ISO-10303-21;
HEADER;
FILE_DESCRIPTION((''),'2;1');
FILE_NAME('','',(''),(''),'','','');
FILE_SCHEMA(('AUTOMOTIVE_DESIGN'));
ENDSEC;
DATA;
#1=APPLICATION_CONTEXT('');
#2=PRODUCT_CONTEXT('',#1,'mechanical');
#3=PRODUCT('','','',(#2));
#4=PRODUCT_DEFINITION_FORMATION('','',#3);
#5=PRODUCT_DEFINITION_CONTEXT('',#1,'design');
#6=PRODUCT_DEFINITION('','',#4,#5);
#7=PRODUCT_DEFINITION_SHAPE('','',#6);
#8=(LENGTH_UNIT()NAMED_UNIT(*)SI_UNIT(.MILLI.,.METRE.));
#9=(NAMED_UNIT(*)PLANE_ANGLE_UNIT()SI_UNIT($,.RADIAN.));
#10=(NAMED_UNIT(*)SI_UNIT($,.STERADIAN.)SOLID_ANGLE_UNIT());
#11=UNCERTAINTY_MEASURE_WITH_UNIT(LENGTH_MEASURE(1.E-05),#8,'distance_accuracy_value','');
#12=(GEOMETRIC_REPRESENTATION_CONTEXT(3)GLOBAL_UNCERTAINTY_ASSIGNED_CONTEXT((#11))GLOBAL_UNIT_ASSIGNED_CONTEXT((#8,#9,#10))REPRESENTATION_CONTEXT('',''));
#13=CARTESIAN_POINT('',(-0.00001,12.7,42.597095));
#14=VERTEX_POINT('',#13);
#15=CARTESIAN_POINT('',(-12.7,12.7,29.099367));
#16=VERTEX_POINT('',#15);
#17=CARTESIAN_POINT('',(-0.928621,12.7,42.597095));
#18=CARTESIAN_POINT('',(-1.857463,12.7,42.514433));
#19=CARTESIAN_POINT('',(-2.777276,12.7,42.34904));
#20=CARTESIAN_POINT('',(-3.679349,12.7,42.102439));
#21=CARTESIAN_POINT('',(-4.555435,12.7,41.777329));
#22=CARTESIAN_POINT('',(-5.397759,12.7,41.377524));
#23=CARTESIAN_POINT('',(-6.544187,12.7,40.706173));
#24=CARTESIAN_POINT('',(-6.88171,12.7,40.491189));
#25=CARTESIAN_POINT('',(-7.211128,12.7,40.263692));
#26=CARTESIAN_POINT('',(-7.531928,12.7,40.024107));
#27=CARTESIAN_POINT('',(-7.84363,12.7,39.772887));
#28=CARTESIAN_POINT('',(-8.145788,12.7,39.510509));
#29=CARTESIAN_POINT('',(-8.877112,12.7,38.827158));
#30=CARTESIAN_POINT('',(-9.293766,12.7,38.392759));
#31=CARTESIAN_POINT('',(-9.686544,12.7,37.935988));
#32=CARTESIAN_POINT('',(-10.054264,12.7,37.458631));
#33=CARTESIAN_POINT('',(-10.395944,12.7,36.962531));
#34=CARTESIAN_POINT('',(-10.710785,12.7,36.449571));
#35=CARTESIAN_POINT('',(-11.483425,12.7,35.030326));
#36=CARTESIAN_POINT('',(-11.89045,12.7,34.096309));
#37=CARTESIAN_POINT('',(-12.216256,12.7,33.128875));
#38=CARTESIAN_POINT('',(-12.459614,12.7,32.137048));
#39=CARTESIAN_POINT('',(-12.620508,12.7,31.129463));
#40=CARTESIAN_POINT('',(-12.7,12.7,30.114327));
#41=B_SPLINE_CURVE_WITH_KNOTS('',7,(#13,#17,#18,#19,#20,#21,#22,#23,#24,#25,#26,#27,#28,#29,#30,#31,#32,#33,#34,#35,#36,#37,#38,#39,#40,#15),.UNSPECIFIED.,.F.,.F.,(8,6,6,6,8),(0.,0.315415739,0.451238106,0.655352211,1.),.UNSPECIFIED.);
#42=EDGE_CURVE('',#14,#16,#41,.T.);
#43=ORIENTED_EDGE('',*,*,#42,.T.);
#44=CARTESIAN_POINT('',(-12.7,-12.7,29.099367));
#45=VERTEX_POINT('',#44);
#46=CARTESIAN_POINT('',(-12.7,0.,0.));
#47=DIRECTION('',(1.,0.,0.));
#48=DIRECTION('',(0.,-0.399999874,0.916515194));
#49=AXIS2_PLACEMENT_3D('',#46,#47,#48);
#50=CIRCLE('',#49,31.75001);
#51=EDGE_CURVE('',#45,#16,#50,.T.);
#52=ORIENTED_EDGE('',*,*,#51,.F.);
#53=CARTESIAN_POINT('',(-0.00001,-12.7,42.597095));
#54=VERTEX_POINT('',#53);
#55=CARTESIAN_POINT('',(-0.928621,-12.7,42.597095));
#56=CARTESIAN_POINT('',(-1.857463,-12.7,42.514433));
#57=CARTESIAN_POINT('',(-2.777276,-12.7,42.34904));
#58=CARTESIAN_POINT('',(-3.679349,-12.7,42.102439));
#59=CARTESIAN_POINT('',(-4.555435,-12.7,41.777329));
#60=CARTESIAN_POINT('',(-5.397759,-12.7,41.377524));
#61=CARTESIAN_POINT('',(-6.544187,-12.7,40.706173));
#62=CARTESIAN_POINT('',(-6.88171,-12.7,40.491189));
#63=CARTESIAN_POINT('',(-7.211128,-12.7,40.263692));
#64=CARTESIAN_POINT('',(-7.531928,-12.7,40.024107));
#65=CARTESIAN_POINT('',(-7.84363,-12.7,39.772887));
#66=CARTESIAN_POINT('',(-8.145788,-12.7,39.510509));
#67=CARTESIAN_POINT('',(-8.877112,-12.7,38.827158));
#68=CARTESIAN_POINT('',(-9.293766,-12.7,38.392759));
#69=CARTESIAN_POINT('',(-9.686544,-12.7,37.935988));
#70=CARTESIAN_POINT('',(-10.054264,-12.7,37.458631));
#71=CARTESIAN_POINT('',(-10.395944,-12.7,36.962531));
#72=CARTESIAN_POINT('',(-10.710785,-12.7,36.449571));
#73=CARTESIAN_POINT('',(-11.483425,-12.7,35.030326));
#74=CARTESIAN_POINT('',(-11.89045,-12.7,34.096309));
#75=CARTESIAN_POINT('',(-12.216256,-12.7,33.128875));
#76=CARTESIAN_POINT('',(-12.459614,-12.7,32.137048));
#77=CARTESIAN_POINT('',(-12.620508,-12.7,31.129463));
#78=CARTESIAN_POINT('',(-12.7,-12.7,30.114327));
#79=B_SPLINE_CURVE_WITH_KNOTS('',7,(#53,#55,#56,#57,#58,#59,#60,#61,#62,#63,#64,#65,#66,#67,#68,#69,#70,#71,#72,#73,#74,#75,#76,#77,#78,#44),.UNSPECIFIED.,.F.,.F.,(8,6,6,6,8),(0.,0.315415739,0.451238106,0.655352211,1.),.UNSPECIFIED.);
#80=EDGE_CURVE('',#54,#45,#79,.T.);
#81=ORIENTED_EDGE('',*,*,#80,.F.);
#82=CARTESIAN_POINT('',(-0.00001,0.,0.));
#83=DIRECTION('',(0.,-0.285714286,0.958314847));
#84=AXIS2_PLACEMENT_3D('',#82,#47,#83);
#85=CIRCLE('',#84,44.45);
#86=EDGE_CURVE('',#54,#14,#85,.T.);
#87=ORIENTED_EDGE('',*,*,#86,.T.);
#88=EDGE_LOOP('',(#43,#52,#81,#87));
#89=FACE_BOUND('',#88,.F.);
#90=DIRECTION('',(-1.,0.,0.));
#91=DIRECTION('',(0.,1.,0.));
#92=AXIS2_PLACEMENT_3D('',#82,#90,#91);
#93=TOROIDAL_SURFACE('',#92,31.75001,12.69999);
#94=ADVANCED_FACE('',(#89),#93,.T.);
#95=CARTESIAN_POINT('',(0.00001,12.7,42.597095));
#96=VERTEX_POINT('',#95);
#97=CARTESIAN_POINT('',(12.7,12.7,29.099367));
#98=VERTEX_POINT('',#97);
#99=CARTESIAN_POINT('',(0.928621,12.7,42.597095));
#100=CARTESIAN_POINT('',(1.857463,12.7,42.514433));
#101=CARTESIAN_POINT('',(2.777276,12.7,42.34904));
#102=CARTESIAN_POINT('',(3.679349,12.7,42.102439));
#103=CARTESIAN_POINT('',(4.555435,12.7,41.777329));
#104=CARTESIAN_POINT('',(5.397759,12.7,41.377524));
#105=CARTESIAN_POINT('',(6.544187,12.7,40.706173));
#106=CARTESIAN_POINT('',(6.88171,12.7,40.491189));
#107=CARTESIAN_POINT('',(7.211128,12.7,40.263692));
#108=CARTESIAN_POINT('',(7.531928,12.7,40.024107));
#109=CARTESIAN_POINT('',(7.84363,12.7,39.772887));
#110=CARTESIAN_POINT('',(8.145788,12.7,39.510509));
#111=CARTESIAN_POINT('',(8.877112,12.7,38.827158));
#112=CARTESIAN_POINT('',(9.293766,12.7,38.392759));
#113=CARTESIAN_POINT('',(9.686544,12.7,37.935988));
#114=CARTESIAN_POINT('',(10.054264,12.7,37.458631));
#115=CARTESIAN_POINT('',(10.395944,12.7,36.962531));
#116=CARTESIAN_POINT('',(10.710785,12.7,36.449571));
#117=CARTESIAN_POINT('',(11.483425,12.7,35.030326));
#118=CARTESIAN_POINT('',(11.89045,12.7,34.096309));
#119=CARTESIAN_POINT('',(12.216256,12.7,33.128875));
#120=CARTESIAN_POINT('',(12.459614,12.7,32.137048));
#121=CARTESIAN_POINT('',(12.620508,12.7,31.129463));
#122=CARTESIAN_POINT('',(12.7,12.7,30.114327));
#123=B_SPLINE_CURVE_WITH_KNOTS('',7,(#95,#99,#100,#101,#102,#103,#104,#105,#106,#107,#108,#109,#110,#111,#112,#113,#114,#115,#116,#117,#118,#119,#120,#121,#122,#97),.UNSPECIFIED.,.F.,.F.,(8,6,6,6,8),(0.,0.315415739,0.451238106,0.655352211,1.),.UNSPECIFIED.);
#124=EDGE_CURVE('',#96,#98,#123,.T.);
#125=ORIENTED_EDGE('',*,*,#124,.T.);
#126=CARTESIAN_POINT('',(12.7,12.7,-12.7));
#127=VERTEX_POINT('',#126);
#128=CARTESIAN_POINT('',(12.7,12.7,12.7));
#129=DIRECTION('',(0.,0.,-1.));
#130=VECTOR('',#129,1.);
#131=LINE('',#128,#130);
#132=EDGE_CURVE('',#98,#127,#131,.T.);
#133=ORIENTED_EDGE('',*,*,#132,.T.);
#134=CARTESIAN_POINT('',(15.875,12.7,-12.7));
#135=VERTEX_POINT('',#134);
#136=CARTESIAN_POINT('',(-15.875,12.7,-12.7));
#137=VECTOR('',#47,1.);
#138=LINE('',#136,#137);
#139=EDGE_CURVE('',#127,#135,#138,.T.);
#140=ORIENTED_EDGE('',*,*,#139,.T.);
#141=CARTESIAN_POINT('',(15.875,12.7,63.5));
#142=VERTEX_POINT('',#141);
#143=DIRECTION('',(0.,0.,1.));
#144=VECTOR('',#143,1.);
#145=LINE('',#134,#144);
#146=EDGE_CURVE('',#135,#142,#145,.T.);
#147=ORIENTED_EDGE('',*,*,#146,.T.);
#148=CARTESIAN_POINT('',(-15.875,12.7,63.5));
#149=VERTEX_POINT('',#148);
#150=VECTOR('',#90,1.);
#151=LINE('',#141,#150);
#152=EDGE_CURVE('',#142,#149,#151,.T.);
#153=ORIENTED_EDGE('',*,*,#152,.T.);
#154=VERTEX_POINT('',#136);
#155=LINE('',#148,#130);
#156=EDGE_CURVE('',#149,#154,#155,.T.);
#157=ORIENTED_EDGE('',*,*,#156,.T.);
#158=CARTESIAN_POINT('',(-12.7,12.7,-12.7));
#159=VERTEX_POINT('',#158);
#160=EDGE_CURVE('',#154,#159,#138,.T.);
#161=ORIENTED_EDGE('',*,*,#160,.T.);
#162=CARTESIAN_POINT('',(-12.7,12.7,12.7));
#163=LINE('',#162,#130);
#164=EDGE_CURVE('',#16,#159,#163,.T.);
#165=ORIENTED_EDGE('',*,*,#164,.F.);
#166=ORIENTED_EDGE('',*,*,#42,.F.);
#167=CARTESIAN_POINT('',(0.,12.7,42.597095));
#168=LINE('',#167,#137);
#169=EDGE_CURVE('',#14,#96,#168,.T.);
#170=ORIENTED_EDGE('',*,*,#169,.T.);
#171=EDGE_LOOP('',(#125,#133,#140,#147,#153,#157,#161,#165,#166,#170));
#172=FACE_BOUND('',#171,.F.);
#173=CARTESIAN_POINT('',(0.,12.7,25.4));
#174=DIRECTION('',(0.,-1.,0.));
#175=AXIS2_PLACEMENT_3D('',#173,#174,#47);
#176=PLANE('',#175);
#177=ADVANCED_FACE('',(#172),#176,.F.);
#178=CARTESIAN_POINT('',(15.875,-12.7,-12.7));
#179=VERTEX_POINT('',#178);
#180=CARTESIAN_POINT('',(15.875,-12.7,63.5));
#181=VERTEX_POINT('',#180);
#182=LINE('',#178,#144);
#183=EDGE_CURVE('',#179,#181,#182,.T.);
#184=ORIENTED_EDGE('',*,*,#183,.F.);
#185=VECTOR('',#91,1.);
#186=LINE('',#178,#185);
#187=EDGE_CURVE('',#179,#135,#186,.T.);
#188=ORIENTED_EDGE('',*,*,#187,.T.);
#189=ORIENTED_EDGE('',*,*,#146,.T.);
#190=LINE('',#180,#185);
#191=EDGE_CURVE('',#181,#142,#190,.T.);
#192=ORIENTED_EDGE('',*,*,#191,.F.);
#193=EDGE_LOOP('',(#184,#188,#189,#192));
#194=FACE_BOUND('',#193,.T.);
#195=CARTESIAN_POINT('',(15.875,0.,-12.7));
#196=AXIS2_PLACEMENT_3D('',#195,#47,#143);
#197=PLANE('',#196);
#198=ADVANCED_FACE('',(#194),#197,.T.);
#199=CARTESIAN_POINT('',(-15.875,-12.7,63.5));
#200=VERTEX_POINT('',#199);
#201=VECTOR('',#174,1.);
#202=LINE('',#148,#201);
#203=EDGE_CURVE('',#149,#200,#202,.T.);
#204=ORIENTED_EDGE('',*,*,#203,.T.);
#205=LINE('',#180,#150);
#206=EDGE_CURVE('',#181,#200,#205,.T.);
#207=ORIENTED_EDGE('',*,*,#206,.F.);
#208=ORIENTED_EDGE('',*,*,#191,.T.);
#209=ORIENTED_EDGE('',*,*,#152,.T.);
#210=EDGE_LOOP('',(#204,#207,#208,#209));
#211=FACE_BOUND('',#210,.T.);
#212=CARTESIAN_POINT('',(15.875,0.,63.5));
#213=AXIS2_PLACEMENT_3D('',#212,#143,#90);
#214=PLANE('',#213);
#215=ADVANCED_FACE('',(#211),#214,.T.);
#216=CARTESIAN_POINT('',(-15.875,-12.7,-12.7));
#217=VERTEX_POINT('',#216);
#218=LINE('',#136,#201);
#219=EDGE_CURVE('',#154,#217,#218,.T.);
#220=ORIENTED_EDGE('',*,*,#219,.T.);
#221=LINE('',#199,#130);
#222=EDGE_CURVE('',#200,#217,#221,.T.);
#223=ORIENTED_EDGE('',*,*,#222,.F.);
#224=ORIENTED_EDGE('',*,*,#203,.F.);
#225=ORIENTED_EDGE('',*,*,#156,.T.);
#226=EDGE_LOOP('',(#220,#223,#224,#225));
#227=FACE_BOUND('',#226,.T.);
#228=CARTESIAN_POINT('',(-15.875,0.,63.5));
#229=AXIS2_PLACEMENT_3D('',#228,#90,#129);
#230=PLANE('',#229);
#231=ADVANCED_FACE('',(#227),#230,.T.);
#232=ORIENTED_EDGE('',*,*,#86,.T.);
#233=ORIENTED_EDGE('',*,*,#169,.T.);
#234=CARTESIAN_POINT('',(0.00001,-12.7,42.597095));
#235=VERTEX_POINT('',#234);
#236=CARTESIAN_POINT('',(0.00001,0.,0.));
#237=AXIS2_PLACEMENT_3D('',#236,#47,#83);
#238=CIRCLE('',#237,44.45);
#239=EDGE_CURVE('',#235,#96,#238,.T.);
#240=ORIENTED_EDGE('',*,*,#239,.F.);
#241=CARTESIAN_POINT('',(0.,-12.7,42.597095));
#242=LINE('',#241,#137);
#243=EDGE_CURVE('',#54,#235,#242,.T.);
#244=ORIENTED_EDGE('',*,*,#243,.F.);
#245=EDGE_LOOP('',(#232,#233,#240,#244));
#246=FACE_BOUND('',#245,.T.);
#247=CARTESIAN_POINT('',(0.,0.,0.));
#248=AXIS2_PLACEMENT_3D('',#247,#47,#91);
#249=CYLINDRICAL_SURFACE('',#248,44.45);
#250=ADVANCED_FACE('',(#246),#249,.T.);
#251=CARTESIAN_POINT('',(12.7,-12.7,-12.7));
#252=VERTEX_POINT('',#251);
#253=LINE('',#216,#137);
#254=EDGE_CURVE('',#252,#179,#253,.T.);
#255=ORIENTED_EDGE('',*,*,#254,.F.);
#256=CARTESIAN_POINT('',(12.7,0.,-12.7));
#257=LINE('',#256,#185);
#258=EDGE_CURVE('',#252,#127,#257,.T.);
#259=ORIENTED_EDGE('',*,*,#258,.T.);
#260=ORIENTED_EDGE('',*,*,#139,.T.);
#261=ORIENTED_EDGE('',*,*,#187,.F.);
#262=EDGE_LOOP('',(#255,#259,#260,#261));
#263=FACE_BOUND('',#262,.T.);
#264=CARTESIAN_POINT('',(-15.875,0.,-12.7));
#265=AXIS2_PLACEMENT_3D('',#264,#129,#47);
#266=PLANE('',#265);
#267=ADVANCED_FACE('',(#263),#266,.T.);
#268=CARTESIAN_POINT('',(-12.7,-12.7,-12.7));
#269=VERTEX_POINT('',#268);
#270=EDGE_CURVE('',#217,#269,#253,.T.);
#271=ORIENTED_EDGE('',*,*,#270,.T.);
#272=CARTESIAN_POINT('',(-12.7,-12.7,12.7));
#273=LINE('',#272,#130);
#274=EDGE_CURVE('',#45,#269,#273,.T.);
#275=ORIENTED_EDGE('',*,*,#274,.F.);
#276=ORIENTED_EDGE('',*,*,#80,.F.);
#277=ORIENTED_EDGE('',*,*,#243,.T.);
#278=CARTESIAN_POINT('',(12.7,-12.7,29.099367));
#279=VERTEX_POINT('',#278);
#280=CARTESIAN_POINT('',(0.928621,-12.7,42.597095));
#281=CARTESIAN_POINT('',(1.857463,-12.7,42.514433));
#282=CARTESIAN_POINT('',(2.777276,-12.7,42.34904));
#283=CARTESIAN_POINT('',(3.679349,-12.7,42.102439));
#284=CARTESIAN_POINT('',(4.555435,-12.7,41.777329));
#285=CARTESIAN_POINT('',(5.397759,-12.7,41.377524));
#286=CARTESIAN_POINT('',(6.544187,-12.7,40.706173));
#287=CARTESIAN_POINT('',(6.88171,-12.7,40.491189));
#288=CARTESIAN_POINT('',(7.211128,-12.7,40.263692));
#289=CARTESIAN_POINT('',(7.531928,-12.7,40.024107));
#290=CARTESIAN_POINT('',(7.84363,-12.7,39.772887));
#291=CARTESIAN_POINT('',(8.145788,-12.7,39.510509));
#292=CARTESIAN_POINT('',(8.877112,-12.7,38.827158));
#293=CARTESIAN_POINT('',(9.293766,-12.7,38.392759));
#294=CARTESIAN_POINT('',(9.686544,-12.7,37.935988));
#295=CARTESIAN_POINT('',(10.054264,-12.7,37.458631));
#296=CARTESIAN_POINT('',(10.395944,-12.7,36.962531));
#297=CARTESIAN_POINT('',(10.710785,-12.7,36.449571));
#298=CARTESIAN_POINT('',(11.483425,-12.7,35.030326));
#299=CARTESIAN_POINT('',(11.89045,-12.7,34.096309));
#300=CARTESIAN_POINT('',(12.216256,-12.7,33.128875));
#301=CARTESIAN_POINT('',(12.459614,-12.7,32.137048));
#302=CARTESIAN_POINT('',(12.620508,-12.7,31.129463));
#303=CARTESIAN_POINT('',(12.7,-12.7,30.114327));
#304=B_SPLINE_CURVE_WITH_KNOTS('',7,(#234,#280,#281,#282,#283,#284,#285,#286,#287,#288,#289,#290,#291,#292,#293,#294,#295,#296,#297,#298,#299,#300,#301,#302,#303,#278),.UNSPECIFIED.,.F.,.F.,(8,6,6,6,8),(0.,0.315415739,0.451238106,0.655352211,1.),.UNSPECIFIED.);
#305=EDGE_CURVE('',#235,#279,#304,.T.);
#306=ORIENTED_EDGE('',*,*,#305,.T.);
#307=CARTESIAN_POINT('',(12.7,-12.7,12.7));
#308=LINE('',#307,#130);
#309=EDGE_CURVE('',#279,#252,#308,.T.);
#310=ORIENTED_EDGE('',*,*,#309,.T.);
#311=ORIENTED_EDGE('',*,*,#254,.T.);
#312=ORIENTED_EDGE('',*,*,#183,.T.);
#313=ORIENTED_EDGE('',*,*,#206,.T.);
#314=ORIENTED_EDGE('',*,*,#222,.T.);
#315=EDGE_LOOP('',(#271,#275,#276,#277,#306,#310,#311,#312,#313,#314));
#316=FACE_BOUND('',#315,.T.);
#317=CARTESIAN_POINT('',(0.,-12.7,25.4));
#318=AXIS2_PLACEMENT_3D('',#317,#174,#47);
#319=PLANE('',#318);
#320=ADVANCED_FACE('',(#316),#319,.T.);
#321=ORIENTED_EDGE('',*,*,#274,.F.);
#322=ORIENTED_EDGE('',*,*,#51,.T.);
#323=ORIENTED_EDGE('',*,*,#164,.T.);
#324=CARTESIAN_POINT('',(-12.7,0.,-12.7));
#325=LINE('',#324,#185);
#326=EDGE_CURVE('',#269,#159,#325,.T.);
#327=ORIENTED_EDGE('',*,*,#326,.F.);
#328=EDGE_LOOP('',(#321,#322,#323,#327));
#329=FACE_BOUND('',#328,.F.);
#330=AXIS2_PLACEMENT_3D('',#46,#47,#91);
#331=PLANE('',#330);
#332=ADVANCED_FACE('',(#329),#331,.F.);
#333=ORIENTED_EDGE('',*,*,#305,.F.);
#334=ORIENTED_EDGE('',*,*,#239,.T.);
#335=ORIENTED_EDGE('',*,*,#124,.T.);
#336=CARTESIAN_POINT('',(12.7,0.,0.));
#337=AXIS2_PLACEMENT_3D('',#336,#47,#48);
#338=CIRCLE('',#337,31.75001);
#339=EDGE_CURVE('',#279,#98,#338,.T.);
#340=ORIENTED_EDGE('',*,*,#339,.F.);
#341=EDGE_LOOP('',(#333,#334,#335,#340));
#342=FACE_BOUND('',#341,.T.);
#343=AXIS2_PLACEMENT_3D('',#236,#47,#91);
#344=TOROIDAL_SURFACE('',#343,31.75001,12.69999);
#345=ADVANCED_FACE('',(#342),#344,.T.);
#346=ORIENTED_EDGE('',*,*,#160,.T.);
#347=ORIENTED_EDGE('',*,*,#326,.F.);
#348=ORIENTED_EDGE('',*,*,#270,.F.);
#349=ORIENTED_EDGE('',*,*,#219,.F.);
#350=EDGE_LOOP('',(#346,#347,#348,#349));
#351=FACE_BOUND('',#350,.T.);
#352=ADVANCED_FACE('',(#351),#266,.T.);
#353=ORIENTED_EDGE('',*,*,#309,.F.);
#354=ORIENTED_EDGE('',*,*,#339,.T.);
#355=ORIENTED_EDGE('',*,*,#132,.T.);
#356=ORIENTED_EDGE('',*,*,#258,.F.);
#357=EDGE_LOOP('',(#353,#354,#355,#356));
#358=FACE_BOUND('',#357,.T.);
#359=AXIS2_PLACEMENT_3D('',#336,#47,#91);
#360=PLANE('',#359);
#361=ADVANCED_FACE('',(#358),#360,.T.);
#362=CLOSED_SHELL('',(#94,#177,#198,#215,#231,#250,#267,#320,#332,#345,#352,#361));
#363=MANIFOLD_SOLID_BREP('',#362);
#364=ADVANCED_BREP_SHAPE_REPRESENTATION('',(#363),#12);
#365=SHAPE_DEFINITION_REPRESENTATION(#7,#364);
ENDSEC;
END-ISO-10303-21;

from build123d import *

# Parameters (mm, degrees)
F0_R     = 44.45
F0_R_2   = 6.35
F1_DEPTH = 12.7
F2_R     = 12.69999
F4_DEPTH = 12.7


# Not quite as in the source:
# - a fillet or chamfer is up to 0.001 mm smaller than in the source, because OpenCascade refuses the exact size


with BuildPart() as f1:
    # F0 (on Right) → F1 (new body, symmetric)
    with BuildSketch(Plane.YZ):
        Circle(F0_R)
        Circle(F0_R_2, mode=Mode.SUBTRACT)
    extrude(amount=F1_DEPTH, both=True)

    # F2 (radius 12.7 in the source; OpenCascade refuses exactly that, so slightly less here)
    f2_edges = [f1.edges().sort_by_distance(p)[0] for p in [
        (12.7, -44.45, 0),
        (-12.7, -44.45, 0),
    ]]
    fillet(f2_edges, radius=F2_R)

    # F3 (on Front) → F4 (join, symmetric)
    with BuildSketch(Plane.XZ):
        Polygon((15.875, 63.5), (-15.875, 63.5), (-15.875, 12.7), (-15.875, -12.7), (15.875, -12.7), (15.875, 12.7), align=None)
    extrude(amount=F4_DEPTH, both=True)


solid = f1.part
